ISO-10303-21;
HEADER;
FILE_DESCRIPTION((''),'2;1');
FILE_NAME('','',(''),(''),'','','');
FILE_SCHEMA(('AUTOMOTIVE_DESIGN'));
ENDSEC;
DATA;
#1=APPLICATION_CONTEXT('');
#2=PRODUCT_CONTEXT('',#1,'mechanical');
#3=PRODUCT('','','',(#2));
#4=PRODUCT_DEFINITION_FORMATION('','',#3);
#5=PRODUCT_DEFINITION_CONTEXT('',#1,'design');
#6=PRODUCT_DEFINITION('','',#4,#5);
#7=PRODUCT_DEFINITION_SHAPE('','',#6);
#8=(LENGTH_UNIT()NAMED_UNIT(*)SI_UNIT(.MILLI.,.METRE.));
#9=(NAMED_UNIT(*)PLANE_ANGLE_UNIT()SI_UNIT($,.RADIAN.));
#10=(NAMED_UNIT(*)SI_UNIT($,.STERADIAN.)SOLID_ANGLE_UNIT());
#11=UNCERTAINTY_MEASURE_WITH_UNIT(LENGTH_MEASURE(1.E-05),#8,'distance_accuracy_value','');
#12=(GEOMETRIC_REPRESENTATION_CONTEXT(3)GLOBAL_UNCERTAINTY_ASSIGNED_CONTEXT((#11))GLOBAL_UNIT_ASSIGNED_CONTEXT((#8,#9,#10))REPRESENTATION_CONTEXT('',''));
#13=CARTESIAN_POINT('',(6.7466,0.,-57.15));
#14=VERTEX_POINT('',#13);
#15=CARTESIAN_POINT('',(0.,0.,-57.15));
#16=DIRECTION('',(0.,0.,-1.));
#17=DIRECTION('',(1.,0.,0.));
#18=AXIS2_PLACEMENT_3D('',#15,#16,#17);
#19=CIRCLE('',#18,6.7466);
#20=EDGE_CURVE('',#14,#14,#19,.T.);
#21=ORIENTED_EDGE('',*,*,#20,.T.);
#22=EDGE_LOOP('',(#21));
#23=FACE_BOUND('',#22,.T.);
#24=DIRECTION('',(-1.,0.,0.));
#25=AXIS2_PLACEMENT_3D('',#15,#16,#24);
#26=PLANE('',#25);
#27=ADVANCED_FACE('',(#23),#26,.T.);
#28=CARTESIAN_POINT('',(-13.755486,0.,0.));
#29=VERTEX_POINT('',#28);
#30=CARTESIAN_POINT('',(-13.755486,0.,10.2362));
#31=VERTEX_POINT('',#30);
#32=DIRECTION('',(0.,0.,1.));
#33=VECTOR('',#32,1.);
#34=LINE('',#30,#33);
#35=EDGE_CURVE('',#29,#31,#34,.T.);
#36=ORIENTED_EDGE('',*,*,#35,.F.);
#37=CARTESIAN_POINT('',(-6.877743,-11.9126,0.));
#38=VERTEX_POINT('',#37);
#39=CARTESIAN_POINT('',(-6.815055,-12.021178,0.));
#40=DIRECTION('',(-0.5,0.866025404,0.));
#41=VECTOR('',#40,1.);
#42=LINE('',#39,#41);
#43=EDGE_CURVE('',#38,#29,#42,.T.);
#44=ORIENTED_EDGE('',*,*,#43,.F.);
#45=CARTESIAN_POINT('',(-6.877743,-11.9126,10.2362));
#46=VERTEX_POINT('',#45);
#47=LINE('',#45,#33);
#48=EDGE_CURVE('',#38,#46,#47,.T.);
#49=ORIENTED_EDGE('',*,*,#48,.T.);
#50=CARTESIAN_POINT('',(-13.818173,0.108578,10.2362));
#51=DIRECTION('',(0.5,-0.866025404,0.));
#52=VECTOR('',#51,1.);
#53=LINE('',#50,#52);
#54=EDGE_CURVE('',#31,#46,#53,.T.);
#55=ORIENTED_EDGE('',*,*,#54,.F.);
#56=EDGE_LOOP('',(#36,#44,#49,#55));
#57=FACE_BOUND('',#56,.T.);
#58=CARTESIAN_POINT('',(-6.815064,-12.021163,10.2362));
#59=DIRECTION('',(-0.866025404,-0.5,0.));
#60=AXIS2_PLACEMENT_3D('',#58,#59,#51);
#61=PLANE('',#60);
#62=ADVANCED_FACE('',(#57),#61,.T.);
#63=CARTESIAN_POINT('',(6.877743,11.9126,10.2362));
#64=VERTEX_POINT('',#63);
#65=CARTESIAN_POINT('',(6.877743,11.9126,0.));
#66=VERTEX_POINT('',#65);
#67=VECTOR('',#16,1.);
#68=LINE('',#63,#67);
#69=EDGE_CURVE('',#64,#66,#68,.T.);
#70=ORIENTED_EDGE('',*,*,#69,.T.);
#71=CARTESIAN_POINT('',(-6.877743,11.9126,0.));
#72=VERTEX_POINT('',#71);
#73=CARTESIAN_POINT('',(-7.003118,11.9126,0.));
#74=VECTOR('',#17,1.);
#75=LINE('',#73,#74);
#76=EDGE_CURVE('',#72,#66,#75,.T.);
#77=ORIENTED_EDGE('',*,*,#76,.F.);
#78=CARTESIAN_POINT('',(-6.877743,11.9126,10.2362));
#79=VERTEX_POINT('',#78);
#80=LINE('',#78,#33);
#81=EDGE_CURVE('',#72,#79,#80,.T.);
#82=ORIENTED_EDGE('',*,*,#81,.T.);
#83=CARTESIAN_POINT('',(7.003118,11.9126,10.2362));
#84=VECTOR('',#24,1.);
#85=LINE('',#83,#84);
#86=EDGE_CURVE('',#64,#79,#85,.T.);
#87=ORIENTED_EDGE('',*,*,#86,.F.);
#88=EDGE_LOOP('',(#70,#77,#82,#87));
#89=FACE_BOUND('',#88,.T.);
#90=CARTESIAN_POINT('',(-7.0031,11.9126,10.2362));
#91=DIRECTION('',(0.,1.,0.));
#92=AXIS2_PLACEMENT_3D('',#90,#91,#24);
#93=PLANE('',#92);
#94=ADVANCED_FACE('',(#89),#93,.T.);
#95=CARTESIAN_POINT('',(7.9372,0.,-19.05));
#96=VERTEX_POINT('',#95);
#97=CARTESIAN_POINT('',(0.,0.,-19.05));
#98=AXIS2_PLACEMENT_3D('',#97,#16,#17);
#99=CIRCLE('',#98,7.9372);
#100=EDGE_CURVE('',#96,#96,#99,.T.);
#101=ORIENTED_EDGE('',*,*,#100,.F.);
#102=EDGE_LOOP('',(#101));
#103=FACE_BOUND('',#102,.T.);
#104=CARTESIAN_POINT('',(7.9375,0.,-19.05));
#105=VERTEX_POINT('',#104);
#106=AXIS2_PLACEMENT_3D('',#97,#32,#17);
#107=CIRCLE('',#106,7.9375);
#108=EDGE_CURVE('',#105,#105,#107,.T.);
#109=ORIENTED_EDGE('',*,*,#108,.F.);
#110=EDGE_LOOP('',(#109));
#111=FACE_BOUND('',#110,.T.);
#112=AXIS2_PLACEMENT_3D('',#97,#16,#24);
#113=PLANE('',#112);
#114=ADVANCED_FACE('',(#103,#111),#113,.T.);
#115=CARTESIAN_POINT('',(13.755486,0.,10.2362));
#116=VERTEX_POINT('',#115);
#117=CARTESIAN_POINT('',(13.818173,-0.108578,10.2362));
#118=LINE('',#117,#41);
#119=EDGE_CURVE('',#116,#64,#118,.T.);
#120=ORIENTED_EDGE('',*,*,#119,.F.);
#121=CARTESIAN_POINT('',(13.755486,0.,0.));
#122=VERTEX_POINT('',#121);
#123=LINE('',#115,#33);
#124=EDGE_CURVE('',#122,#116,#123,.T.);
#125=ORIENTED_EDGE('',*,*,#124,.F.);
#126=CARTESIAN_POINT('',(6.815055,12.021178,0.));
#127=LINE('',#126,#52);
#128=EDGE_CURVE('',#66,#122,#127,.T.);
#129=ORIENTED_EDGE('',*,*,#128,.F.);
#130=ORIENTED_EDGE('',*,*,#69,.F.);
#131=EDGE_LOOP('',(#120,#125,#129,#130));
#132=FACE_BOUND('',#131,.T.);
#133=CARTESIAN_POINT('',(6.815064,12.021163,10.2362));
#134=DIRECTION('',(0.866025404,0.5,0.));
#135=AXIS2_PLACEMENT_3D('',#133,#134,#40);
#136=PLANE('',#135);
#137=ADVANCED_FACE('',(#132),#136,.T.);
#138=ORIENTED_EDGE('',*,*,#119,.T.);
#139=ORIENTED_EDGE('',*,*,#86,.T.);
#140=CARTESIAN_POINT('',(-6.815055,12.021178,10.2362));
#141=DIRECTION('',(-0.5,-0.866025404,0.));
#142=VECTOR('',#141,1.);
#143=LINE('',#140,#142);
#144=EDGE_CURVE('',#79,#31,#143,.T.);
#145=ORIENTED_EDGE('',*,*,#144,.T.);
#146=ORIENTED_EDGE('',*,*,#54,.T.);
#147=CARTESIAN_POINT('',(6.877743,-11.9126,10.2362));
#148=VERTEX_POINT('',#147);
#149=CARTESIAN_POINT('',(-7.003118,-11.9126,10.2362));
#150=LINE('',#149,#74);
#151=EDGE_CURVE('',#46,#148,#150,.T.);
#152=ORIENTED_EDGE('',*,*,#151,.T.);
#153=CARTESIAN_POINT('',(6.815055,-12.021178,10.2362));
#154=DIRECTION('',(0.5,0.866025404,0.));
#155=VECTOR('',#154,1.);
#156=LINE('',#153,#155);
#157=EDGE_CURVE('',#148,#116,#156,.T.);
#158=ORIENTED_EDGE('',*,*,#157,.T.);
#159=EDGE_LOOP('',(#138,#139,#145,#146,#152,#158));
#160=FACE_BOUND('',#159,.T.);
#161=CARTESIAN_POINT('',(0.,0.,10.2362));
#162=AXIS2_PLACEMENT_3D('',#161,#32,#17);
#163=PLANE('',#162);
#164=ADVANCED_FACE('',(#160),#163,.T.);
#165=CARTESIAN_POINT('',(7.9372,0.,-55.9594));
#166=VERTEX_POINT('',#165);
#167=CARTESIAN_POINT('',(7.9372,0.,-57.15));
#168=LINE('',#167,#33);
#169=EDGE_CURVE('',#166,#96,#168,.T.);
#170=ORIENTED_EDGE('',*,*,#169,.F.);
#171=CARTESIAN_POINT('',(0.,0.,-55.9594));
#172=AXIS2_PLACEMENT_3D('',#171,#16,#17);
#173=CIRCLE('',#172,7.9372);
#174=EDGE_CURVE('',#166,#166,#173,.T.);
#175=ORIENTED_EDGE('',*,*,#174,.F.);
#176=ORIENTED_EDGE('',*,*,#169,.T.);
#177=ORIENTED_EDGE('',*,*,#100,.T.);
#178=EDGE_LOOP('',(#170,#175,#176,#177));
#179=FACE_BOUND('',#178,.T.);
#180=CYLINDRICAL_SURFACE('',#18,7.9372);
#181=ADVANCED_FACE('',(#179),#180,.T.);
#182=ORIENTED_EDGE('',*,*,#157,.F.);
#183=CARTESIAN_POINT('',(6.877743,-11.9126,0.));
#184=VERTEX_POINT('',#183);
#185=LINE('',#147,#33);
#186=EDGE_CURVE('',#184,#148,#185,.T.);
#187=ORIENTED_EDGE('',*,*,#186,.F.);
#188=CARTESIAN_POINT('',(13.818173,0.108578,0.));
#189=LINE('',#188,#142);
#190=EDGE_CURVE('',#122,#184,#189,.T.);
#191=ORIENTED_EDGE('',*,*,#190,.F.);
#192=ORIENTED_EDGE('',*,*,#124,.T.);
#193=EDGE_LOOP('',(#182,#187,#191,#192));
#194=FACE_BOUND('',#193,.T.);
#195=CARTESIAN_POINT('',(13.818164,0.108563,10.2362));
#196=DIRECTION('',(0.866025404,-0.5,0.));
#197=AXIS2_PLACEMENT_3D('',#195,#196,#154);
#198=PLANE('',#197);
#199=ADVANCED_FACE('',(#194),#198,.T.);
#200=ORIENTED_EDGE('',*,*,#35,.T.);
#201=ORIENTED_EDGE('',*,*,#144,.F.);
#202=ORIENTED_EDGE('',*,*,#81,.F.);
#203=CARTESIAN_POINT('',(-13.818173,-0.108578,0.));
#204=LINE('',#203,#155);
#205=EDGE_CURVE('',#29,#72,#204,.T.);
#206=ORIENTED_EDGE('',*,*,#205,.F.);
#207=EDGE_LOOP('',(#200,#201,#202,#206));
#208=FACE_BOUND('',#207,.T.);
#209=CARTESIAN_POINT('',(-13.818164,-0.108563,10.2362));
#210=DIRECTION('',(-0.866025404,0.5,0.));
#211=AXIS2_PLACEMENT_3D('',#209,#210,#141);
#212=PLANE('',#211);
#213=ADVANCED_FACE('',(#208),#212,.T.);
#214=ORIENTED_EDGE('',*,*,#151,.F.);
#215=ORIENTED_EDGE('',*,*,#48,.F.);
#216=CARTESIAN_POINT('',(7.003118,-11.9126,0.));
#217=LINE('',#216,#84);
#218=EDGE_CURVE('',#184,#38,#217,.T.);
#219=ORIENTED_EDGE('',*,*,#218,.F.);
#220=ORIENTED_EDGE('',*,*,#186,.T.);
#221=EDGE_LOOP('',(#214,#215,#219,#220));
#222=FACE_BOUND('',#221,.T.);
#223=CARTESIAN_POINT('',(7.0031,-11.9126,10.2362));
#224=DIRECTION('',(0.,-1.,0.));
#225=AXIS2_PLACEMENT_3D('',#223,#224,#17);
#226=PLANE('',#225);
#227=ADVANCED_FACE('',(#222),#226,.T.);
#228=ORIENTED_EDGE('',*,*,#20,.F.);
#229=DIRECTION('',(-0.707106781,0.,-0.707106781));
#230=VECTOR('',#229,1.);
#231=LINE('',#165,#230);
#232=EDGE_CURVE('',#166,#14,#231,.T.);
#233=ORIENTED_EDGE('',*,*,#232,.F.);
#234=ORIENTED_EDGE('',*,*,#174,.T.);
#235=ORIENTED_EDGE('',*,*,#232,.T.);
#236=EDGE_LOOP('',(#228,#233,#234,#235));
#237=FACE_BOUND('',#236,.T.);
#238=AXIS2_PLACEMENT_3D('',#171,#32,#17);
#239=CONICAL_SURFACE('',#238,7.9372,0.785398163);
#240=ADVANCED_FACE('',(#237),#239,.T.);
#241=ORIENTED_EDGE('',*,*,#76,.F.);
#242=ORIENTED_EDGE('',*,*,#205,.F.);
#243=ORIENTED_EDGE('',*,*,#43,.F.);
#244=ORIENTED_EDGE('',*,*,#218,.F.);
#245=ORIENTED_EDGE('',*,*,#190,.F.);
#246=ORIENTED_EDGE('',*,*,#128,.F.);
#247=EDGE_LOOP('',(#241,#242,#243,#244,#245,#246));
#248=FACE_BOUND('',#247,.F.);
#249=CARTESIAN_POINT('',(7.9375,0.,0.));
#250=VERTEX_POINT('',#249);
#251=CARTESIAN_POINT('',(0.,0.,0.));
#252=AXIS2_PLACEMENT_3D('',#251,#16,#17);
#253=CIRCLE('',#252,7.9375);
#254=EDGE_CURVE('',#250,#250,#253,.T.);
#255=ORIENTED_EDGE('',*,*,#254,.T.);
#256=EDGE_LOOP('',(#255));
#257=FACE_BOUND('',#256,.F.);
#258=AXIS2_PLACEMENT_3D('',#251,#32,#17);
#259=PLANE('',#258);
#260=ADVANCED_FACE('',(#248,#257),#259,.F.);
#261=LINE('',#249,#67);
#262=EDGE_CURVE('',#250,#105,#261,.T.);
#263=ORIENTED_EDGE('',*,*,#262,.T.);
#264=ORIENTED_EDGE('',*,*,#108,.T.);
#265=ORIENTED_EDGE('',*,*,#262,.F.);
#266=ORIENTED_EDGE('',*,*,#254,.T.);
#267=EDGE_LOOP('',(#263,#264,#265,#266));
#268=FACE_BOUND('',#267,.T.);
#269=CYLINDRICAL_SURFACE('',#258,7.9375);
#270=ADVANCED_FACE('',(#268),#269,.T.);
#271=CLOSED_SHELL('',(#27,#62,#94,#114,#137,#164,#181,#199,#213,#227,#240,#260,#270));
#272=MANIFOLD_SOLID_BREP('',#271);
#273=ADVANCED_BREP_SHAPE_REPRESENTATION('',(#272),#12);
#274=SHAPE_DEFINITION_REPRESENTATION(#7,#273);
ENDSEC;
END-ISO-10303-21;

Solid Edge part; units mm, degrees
sketch "Sketch1" plane through (0, 0, 0) normal (0, 0, 1) x (1, 0, 0)
  circle A0 centre (0, 0) radius 13.8186
  dimension "D1" = 27.6372
extrude "Protrusion1" add sketch "Sketch1" along normal blind 10.2362
sketch "Sketch2" plane through (0, 0, 0) normal (0, 0, -1) x (1, 0, 0)
  circle A0 centre (0, 0) radius 7.9375
extrude "Protrusion2" add sketch "Sketch2" along normal blind 57.15
sketch "Sketch3" plane through (0, 0, -57.15) normal (0, 0, -1) x (1, 0, 0)
  circle A0 centre (0, 0) radius 7.9372
extrude "Cutout1" cut sketch "Sketch3" against normal blind 38.1 flip side to cut
chamfer "Chamfer_1" distance 1.1906 angle 45 1 edges at (-7.9372, 0, -57.15)
sketch "Sketch4" plane through (0, 0, 10.2362) normal (0, 0, 1) x (1, 0, 0)
  line L0 (-7.0031, 11.9126) -> (7.0031, 11.9126)
  dimension "D1" = 23.8252
extrude "Cutout2" cut sketch "Sketch4" against normal up to next material side at (0, 11.9626, 10.2362)
pattern_circular "Pattern1" count 6 over 360 about axis through (0, 0, 10.2362) along (0, 0, 1) of "Cutout2"
properties part number "24100112"
